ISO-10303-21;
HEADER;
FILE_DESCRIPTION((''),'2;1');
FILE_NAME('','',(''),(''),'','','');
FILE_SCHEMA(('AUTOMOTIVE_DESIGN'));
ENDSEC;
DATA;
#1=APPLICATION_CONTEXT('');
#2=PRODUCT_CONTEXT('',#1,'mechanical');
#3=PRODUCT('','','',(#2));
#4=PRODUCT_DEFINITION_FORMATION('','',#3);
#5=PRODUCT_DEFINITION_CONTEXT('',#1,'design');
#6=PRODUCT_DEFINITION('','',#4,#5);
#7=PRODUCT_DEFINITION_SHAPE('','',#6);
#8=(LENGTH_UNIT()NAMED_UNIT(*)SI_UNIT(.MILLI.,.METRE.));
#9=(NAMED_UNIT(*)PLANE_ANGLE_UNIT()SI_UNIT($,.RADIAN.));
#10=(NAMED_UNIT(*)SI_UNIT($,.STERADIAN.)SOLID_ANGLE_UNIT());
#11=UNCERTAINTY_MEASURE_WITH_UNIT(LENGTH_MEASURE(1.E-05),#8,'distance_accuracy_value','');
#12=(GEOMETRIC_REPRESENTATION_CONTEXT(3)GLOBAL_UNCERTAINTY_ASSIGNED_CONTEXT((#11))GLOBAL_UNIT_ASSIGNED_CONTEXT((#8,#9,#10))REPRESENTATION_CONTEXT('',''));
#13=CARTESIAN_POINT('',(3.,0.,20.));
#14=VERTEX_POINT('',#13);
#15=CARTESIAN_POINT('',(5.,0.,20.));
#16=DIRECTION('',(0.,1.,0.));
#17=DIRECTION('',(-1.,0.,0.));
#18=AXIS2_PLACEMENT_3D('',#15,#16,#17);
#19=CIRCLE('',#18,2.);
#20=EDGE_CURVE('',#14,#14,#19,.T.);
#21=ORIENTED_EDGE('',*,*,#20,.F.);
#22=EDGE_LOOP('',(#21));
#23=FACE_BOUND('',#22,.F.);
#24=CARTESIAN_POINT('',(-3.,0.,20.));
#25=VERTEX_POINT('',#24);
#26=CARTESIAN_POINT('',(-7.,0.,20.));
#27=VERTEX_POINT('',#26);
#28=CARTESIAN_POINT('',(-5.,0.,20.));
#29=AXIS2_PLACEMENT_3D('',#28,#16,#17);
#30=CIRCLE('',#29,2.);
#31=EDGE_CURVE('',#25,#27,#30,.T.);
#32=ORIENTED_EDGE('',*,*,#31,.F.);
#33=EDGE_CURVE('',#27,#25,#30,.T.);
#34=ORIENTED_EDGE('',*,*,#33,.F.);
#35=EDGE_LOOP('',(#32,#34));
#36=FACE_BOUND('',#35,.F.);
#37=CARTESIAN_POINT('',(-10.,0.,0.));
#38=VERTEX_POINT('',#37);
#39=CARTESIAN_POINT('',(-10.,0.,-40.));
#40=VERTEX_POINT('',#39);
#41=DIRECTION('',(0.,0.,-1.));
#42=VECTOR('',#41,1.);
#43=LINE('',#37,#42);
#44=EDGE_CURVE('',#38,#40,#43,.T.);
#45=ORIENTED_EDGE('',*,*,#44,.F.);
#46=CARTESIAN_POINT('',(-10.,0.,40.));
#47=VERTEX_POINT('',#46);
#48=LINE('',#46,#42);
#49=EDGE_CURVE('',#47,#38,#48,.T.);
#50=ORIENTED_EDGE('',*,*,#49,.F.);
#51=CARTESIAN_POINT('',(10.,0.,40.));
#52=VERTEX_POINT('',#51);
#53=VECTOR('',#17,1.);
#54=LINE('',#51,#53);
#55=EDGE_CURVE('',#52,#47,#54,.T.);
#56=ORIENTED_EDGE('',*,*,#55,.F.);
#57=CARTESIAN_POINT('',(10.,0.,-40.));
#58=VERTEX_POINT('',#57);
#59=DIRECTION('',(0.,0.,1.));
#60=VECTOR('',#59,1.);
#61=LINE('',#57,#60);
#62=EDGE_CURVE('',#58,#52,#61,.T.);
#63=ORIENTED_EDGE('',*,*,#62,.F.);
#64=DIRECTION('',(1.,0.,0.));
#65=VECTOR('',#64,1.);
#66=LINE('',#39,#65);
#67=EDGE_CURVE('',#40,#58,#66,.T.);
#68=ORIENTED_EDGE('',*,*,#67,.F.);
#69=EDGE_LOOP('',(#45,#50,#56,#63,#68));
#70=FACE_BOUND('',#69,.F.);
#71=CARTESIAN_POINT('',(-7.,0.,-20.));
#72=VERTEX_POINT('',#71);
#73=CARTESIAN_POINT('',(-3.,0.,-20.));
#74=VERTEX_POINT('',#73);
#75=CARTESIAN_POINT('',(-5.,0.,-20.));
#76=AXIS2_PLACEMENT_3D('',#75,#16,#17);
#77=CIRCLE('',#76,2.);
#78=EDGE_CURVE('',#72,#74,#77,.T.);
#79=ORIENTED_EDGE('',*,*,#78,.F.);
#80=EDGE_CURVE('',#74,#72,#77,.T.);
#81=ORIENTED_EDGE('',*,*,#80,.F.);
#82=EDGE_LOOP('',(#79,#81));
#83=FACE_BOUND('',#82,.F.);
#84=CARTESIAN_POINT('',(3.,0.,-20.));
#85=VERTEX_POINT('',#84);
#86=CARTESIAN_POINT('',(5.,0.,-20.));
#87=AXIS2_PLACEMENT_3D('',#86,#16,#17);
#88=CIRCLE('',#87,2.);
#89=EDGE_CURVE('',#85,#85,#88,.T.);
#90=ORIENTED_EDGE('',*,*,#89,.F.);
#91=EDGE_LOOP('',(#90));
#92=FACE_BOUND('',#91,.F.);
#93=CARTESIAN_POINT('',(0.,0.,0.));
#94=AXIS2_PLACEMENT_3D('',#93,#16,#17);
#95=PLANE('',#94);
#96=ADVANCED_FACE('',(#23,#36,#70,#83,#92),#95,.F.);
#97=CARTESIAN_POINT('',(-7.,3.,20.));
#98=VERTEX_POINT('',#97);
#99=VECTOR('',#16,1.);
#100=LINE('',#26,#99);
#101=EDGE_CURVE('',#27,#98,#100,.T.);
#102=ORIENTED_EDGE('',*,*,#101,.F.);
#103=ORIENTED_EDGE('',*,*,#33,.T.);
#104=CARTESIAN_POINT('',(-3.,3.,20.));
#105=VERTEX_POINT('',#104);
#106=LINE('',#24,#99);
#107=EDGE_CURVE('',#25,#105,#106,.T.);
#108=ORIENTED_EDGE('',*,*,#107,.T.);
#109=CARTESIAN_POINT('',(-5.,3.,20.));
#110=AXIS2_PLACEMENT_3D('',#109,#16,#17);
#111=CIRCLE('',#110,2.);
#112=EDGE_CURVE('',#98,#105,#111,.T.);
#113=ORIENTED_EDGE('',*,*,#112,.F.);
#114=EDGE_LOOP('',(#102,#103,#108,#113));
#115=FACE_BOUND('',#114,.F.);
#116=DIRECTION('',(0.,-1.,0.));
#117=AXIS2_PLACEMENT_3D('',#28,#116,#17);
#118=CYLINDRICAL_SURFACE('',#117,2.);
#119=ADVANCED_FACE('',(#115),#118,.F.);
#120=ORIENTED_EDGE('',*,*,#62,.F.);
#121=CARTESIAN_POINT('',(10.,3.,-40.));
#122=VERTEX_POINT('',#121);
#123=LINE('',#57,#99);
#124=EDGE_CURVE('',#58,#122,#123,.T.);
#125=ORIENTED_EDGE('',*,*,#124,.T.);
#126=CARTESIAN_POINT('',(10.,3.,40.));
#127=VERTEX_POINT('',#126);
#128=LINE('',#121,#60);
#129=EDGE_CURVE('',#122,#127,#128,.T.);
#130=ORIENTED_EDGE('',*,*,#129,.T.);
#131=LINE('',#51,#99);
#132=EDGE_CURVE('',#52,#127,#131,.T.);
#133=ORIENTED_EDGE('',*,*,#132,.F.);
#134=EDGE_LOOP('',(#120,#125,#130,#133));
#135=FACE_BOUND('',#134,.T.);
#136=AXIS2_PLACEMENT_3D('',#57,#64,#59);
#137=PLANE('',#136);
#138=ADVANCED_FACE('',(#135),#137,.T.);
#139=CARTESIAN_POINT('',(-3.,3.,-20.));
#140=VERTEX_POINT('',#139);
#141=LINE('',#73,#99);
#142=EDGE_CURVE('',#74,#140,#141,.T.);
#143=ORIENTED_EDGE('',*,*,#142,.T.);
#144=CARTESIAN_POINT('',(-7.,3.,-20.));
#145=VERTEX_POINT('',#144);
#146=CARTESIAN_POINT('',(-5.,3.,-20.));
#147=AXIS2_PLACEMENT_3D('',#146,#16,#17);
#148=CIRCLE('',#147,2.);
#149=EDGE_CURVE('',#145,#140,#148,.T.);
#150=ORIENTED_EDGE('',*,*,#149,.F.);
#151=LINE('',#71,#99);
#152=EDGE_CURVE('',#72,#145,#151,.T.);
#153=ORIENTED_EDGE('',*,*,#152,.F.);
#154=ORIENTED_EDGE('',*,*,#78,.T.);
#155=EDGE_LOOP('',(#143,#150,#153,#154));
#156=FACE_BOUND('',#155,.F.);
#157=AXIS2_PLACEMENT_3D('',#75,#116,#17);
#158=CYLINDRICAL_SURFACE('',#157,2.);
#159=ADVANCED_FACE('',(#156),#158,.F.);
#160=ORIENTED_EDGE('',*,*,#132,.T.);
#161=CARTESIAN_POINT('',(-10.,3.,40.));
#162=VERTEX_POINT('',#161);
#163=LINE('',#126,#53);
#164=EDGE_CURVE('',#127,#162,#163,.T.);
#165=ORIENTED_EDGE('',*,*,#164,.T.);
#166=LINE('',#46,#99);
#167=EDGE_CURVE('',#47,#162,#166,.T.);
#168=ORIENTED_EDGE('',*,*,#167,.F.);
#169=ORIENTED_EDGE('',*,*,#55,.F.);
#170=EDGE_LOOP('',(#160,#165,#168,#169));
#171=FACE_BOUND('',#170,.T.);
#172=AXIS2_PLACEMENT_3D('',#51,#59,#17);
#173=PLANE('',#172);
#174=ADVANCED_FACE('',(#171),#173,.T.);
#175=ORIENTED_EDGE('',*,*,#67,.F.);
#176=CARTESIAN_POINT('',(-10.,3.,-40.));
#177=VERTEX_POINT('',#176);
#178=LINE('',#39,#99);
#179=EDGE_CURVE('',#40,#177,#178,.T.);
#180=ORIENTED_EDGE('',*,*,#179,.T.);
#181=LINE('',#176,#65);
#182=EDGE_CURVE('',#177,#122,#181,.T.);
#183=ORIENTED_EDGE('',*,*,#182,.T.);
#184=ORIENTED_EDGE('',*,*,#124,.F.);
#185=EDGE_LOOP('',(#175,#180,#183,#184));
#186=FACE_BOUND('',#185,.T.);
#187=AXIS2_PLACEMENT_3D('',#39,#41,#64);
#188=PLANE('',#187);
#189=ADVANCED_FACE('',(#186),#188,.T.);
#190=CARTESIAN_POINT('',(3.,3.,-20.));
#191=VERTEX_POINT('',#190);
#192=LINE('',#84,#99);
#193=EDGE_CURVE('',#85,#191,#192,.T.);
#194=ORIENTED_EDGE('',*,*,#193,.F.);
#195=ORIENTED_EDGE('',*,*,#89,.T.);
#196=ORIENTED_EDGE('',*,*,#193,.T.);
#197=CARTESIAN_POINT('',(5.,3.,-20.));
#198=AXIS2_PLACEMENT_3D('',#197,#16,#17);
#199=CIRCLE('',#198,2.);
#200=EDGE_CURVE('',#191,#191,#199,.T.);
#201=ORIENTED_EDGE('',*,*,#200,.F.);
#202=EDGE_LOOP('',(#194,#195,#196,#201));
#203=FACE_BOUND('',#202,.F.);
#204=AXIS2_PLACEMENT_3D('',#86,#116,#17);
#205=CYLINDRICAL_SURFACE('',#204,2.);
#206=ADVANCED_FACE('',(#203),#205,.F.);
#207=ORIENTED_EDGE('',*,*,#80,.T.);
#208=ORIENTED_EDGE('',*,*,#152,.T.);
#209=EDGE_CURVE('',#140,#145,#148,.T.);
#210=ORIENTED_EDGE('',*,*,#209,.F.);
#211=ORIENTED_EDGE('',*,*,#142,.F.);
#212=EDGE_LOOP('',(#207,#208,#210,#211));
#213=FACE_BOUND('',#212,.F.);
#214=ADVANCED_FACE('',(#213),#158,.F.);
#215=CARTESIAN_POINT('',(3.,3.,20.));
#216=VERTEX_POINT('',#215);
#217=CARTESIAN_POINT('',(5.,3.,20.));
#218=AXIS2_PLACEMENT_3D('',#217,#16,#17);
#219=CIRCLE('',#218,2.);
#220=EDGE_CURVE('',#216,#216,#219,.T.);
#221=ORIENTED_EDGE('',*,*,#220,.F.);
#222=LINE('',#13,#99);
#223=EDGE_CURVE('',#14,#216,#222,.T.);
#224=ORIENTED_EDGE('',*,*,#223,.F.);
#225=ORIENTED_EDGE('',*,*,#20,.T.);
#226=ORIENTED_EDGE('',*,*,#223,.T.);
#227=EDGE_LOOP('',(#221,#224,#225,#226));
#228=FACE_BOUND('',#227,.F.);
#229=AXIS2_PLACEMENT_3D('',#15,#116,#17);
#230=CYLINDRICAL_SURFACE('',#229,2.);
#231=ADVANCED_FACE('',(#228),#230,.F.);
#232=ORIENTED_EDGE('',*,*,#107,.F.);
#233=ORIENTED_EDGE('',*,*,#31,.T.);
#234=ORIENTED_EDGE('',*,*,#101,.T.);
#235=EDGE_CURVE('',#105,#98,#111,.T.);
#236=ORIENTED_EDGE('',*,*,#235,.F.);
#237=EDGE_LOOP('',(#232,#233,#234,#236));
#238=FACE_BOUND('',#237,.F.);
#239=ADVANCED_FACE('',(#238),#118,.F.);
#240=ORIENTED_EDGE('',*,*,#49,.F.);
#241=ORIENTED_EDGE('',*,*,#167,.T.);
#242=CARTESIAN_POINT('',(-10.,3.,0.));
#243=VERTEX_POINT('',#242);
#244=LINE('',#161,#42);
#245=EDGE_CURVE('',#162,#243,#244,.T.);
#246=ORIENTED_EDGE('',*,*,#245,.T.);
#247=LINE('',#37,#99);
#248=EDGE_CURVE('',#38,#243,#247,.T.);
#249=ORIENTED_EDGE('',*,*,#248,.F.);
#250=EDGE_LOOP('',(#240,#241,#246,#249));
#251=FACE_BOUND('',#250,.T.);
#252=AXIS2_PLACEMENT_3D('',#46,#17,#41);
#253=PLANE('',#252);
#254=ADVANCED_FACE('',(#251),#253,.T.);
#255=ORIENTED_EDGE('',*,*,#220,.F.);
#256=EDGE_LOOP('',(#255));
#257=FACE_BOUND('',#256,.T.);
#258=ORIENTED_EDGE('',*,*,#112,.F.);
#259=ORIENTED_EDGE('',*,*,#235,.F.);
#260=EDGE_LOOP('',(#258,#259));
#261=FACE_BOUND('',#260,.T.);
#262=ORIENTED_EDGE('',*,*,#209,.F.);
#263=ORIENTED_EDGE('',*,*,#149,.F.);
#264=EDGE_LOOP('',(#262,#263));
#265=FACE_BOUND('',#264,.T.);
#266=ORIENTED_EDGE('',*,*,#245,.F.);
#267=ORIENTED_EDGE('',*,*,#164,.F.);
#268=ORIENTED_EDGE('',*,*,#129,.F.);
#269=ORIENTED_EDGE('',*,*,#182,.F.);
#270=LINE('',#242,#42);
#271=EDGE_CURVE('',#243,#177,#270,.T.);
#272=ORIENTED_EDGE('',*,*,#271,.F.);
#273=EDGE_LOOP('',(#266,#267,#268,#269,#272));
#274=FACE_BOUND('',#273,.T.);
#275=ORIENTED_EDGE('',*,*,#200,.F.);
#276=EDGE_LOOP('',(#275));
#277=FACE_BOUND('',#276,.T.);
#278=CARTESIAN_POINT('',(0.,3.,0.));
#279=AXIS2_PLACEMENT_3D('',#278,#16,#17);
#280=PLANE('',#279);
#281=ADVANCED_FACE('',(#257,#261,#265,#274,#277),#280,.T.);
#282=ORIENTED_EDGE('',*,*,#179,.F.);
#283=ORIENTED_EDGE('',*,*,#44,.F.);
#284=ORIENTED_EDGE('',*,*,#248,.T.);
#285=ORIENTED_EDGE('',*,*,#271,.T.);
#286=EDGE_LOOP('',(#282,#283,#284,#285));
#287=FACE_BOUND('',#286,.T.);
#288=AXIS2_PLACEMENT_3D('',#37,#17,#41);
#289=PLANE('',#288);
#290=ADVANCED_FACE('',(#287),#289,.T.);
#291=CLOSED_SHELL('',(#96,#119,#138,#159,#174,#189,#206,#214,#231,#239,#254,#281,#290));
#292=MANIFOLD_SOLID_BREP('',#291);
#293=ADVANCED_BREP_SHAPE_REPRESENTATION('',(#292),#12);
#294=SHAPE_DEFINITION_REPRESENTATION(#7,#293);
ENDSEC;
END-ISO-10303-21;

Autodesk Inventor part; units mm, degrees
ref_plane "YZ Plane" through (0, 0, 0) normal (1, 0, 0) x (0, 1, 0)
ref_plane "XZ Plane" through (0, 0, 0) normal (0, 1, 0) x (-1, 0, 0)
ref_plane "XY Plane" through (0, 0, 0) normal (0, 0, 1) x (1, 0, 0)
sketch "Boceto1" plane through (0, 0, 0) normal (0, 1, 0) x (-1, 0, 0)
  line L0 (10, 0) -> (10, -40)
  line L1 (10, -40) -> (-10, -40)
  line L2 (-10, -40) -> (-10, 40)
  line L3 (-10, 40) -> (10, 40)
  line L4 (10, 40) -> (10, 0)
  line L5 (0, 0) -> (0, 20)
  line L6 (0, 20) -> (5, 20)
  line L7 (0, 0) -> (0, -20)
  line L8 (0, -20) -> (5, -20)
  line L9 (0, 20) -> (-5, 20)
  line L10 (0, -20) -> (-5, -20)
  circle A0 centre (5, 20) radius 2
  circle A1 centre (5, -20) radius 2
  circle A2 centre (-5, -20) radius 2
  circle A3 centre (-5, 20) radius 2
  dimension "d1" = 40
  dimension "d2" = 20
  dimension "d3" = 80
  dimension "d5" = 20
  dimension "d6" = 5
  dimension "d7" = 20
  dimension "d8" = 5
  dimension "d9" = 5
  dimension "d10" = 4
  dimension "d11" = 4
  dimension "d12" = 4
  dimension "d13" = 4
extrude "Extrusión1" add sketch "Boceto1" along normal blind 3
equation "\"Radio_pliegue\" = Grosor"
equation "\"Anchura_desahogo_plegado\" = Grosor"
equation "\"Profundidad_desahogo_plegado\" = 0.5 * Grosor"
equation "\"Tamaño_destalonado\" = 4 * Grosor"
equation "\"Remanente_mínimo\" = 2 * Grosor"
equation "\"Radiodetransición\" = Radio_pliegue"
equation "\"Tamaño_de_radio_de_Jacobi\" = Radio_pliegue"
equation "\"TamañoSeparación\" = Grosor"
equation "\"Grosor\" = 0.5"
properties part number "Soporte_Techo"
